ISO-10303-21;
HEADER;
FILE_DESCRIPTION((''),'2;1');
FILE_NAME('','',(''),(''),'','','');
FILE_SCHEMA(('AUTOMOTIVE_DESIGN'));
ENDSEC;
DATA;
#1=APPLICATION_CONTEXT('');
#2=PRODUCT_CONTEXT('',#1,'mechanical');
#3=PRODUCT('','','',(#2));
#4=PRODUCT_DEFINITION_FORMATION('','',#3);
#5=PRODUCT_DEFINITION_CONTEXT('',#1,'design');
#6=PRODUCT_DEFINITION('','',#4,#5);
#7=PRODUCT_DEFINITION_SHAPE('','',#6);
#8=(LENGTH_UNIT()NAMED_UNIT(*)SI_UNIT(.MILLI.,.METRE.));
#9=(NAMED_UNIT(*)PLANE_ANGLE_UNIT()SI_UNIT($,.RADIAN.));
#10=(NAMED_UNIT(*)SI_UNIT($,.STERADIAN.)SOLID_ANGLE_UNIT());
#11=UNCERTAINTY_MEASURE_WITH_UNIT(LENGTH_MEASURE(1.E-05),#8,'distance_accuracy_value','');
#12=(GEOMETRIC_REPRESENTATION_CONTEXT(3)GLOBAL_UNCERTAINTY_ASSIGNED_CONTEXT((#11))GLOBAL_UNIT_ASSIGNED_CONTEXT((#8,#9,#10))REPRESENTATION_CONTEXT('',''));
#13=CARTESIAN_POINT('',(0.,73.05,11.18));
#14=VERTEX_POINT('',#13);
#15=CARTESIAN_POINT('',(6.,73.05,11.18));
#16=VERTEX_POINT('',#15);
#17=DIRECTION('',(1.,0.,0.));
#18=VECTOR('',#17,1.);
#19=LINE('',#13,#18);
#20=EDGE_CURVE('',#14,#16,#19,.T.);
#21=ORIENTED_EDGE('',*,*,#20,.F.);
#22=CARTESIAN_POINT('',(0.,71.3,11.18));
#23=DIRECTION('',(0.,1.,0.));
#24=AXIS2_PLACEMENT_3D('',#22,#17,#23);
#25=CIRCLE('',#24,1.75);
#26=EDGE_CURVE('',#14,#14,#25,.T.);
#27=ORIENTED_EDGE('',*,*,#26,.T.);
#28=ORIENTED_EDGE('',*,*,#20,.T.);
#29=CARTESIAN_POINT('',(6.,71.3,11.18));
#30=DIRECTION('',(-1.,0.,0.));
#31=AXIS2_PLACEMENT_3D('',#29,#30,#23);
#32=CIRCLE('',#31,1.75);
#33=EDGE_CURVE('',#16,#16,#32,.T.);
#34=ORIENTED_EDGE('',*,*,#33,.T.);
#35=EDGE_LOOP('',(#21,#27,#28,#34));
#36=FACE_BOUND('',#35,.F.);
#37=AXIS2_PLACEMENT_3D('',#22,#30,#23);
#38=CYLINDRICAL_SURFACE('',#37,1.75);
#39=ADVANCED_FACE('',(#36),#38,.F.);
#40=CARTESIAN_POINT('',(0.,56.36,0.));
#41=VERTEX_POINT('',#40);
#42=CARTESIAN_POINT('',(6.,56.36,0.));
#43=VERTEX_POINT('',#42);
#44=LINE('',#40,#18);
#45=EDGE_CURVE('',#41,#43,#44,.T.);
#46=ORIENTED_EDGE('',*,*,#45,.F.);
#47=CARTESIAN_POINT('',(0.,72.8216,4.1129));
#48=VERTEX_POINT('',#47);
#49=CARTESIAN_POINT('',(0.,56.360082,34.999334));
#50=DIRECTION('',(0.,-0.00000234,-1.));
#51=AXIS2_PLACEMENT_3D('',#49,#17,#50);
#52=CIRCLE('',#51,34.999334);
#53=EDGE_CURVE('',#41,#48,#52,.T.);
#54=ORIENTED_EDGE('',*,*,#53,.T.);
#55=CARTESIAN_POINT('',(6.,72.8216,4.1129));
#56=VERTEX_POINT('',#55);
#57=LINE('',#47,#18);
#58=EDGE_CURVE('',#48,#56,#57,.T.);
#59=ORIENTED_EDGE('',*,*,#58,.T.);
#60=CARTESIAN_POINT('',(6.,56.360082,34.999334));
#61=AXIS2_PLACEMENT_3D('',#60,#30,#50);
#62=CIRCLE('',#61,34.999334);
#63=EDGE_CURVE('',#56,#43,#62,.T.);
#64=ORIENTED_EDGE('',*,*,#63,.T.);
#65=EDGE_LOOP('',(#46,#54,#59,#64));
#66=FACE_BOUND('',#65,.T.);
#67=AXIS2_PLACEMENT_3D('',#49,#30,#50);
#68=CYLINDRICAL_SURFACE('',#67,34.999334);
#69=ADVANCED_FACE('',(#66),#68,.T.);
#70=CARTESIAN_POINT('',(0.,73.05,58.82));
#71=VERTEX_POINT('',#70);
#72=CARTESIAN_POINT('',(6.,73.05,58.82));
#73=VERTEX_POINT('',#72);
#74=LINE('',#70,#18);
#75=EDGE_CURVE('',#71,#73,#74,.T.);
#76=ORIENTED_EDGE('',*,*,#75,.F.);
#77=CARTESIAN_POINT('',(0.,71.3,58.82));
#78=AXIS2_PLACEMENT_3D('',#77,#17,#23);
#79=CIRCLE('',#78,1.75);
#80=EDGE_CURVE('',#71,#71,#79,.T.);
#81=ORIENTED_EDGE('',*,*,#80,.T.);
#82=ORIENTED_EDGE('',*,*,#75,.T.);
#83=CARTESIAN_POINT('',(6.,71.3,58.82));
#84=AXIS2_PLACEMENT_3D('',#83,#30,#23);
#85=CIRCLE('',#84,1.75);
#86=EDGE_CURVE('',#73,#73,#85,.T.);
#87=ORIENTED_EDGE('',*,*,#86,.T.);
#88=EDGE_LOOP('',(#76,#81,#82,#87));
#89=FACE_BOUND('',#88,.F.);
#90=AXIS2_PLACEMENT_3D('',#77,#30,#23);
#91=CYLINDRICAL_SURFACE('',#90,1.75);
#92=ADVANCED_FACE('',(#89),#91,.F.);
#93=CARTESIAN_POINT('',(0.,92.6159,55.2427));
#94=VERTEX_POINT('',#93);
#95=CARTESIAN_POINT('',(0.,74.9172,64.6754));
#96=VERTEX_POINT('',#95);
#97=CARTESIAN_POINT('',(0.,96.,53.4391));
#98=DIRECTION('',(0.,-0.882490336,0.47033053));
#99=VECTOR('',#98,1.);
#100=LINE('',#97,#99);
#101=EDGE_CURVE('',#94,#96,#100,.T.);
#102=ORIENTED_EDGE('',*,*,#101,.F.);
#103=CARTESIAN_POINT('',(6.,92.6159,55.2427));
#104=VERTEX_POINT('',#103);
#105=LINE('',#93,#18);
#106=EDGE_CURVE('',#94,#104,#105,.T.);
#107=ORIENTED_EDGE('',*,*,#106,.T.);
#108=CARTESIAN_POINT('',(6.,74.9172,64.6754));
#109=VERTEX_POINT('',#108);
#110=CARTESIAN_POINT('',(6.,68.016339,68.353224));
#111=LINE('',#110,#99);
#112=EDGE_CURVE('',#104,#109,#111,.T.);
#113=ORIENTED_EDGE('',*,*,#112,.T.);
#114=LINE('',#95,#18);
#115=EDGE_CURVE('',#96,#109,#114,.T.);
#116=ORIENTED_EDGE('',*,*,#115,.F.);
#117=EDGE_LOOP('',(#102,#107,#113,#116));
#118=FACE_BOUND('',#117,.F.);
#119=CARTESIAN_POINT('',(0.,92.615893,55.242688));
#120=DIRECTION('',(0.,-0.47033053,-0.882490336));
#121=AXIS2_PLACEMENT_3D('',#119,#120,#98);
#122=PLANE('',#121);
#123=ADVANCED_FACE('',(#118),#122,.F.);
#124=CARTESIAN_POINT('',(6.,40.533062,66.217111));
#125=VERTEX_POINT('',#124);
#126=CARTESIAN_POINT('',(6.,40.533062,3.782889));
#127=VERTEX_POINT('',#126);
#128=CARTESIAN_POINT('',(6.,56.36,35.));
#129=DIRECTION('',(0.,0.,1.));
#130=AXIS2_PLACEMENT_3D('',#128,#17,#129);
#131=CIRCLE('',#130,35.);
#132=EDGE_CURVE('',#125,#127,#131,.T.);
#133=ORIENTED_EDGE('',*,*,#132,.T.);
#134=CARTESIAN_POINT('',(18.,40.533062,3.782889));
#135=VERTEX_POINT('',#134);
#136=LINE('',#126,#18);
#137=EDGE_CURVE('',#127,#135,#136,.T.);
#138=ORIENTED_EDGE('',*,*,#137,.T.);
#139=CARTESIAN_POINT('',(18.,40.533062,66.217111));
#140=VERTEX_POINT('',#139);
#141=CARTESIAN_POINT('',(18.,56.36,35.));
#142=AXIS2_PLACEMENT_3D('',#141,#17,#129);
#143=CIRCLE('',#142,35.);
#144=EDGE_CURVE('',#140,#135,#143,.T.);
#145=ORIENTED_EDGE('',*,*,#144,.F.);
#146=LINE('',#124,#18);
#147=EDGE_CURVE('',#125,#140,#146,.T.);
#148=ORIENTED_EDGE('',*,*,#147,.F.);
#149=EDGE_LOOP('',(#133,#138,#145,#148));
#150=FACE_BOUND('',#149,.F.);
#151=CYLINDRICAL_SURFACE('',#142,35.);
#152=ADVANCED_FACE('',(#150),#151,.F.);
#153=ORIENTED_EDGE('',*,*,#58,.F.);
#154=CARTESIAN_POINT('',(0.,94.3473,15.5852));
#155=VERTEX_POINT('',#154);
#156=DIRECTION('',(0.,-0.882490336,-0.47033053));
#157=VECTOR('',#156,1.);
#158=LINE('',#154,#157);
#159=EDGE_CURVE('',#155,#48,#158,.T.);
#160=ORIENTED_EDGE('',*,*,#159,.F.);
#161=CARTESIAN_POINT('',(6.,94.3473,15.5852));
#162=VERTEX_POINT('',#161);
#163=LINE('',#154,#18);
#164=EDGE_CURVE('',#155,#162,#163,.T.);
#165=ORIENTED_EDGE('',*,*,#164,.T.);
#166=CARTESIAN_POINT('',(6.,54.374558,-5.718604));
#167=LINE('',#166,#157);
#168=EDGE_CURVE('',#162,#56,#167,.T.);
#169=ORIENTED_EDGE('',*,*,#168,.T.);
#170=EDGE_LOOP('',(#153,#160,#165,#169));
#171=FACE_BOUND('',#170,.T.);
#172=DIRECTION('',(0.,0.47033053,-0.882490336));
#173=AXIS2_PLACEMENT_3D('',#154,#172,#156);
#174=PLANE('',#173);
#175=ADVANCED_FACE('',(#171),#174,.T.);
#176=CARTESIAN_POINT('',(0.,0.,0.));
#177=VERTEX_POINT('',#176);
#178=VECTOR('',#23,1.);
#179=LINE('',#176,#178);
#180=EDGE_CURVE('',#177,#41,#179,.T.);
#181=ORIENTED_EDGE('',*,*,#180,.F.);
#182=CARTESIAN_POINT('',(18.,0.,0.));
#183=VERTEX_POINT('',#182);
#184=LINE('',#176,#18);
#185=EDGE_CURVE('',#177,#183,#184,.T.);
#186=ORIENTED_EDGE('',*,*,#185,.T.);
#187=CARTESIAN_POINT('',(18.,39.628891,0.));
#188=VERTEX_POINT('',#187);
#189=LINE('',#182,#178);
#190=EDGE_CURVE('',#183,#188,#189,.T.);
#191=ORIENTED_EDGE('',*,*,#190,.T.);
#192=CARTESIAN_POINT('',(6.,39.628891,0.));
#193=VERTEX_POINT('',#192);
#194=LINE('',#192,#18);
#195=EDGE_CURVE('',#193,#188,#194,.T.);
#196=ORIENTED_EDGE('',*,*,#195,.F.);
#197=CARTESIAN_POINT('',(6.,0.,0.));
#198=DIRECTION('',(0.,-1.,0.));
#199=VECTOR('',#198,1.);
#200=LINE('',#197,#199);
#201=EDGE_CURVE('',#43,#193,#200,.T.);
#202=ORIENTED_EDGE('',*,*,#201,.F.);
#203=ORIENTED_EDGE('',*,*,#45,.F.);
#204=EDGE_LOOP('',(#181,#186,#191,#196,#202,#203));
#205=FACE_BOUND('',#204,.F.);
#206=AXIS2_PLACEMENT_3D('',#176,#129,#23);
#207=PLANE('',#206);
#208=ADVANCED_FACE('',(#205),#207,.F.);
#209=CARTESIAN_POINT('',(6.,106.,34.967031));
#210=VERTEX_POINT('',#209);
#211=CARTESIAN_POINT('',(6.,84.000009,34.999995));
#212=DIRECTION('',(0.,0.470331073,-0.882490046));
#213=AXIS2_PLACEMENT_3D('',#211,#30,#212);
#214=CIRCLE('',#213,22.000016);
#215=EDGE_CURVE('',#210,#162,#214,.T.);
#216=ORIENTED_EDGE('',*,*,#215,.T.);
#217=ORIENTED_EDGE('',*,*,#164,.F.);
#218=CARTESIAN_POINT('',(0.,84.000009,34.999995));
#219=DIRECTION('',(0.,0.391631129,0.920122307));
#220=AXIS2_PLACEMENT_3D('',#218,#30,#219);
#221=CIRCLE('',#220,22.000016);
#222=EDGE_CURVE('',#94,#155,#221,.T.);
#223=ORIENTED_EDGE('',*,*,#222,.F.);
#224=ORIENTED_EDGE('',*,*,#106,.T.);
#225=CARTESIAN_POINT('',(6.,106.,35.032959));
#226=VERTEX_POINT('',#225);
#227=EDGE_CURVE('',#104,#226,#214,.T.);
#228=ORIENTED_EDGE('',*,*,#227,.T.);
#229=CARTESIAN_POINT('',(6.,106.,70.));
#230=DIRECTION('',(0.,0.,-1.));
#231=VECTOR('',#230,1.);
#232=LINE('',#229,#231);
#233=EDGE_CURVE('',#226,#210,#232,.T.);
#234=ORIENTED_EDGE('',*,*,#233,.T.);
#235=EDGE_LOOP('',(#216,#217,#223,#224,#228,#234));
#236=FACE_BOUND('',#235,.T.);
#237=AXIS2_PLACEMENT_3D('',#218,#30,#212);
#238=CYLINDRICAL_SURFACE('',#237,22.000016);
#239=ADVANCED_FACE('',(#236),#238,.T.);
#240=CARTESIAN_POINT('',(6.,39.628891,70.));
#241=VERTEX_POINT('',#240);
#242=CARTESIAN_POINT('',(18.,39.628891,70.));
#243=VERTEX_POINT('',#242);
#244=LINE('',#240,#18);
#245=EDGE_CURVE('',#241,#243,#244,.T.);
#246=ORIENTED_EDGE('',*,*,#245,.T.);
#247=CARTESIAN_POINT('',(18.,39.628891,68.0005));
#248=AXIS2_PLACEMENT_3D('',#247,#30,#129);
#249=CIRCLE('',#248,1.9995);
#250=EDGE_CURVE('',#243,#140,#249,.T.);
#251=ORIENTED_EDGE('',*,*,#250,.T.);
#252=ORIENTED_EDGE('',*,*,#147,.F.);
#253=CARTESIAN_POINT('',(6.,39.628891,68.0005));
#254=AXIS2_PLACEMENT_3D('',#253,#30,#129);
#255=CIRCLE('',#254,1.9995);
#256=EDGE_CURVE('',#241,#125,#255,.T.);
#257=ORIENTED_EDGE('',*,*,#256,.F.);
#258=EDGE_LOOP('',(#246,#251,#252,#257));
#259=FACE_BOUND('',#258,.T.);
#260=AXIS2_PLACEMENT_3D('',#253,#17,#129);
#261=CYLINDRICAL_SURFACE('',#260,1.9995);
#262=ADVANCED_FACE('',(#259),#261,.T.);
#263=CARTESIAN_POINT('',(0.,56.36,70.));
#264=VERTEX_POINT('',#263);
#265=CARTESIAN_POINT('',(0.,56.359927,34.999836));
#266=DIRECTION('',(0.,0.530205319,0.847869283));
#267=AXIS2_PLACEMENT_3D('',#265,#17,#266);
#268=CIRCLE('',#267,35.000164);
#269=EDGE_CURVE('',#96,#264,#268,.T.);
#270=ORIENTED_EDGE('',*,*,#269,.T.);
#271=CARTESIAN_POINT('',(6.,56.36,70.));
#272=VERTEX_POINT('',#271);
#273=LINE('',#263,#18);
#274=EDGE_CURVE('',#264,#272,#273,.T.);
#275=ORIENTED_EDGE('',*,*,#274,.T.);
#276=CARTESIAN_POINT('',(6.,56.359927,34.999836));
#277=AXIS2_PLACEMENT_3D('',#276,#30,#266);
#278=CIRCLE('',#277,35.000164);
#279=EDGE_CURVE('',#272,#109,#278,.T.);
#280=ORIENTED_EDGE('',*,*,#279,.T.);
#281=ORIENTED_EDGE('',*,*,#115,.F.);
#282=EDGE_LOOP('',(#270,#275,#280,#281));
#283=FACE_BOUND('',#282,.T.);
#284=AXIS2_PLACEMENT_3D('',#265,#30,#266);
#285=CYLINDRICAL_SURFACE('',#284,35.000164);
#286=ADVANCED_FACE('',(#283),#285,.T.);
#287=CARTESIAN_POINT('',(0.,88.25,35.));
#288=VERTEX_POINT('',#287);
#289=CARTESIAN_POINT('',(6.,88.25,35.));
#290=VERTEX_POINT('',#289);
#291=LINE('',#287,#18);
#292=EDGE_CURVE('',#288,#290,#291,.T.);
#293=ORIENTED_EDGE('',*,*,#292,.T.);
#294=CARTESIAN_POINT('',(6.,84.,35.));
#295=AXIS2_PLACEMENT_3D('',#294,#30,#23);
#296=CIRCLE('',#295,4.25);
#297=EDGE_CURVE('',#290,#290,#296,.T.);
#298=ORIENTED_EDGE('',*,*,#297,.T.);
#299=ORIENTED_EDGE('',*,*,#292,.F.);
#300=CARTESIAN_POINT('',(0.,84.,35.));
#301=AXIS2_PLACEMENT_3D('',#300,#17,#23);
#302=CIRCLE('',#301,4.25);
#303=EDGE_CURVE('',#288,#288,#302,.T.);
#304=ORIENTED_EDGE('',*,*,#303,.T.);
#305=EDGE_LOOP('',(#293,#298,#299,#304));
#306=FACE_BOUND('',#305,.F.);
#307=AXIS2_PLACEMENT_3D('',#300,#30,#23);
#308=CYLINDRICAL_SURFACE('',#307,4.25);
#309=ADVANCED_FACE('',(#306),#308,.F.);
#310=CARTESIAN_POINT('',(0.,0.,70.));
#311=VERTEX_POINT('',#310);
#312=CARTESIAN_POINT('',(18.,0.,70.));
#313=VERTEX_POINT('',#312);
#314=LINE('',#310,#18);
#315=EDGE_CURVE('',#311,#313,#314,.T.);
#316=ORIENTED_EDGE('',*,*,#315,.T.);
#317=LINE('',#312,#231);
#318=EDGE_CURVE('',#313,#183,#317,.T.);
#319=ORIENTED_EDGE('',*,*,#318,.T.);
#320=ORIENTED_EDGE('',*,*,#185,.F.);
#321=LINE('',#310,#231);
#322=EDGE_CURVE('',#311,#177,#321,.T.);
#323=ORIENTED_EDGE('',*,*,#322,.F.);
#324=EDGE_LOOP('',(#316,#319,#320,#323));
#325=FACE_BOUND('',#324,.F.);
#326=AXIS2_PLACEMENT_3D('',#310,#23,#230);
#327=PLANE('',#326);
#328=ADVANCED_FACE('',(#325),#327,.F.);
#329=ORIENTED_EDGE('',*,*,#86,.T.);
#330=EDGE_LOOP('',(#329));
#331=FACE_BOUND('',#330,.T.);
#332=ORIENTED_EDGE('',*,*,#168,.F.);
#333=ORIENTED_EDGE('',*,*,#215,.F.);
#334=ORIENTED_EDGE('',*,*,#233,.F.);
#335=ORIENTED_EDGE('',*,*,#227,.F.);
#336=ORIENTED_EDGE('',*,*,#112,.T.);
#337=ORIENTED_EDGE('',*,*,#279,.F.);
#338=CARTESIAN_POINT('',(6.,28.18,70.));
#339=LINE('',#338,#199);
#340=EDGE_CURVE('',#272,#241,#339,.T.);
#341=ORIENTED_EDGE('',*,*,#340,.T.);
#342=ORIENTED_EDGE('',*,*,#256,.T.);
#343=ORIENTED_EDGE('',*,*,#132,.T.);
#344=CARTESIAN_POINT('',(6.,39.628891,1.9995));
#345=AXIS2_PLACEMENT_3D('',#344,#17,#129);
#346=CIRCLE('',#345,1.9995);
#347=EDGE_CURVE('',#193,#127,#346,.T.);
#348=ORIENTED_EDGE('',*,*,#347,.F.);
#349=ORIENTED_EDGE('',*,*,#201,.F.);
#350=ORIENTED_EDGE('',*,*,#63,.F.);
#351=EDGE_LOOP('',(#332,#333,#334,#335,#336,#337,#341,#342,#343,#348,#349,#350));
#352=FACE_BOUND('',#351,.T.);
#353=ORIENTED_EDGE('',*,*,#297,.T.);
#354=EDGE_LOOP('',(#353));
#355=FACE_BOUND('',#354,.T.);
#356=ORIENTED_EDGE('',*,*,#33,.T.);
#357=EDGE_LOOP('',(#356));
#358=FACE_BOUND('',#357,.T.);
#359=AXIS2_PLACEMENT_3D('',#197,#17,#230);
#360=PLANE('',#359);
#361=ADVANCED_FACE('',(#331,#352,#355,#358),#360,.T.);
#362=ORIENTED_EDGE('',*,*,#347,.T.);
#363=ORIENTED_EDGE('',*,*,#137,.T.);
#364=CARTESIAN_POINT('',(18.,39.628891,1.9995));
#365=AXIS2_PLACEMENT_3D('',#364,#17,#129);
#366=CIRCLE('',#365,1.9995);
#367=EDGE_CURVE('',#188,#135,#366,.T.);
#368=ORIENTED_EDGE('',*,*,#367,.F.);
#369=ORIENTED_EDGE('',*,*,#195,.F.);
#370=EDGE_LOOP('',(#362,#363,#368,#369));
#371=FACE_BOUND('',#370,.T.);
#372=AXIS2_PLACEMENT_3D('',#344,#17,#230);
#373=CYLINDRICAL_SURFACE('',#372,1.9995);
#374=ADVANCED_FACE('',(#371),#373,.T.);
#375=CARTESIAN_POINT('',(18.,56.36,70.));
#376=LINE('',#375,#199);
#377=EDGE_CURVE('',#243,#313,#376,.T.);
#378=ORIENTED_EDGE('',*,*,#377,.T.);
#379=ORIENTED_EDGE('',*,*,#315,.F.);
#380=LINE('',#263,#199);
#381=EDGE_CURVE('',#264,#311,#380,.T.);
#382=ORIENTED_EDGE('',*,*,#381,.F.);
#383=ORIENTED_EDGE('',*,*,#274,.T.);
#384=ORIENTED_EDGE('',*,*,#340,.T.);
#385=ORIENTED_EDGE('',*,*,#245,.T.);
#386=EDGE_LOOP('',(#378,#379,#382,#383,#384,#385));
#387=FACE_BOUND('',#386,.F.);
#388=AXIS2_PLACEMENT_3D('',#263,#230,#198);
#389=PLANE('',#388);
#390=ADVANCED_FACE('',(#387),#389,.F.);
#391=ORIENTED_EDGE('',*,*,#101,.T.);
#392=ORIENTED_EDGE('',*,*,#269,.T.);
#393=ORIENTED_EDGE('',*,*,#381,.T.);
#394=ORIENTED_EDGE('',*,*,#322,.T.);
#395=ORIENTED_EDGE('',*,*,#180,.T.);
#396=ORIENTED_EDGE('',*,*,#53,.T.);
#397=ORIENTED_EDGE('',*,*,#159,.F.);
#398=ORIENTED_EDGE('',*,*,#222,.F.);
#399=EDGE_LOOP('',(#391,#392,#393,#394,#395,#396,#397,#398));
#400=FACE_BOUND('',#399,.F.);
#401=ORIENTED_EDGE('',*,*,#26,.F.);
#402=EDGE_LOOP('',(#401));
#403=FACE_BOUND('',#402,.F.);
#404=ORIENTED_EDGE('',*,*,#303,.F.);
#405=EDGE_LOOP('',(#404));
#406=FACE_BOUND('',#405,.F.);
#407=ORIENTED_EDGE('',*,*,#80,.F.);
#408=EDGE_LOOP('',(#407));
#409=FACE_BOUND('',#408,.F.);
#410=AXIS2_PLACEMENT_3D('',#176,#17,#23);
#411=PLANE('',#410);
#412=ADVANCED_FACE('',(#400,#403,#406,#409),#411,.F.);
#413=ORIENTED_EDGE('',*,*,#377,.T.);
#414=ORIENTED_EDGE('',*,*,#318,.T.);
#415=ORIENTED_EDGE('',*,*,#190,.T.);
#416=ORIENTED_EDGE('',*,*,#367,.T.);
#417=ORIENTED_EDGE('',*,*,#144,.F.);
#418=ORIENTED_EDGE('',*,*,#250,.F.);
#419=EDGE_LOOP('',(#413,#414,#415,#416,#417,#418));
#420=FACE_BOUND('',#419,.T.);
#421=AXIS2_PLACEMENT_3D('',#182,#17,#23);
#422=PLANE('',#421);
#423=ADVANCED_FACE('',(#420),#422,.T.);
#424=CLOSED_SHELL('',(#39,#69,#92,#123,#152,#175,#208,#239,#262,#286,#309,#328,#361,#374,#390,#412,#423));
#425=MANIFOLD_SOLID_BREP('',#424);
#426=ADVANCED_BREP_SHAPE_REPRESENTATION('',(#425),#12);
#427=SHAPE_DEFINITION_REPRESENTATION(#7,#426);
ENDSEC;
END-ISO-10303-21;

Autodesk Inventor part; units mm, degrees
ref_plane "YZ Plane" through (0, 0, 0) normal (1, 0, 0) x (0, 1, 0)
ref_plane "XZ Plane" through (0, 0, 0) normal (0, 1, 0) x (-1, 0, 0)
ref_plane "XY Plane" through (0, 0, 0) normal (0, 0, 1) x (1, 0, 0)
sketch "Sketch3" plane through (0, 0, 0) normal (1, 0, 0) x (0, 1, 0)
  line L0 (0, 0) -> (56.36, 0)
  line L1 (56.36, 70) -> (0, 70)
  line L2 (0, 70) -> (0, 0)
  circle A0 centre (84, 35) radius 4.25
  line L3 (84, 35) -> (56.36, 35)
  line L4 (96, 53.4391) -> (74.4743, 64.9114)
  line L5 (94.3473, 15.5852) -> (72.8216, 4.1129)
  arc A1 (94.3473, 15.5852) -> (92.6159, 55.2427) centre (84, 35) ccw
  arc A2 (74.9172, 64.6754) -> (56.36, 70) centre (56.36, 35) ccw
  arc A3 (56.36, 0) -> (72.8216, 4.1129) centre (56.36, 35) ccw
  line L6 (84, 35) -> (71.3, 35)
  line L7 (71.3, 35) -> (71.3, 58.82)
  line L8 (71.3, 58.82) -> (71.3, 35)
  line L9 (71.3, 35) -> (71.3, 11.18)
  circle A4 centre (71.3, 58.82) radius 1.75
  circle A5 centre (71.3, 11.18) radius 1.75
  dimension "d31" = 8.5
  dimension "d33" = 27.64
  dimension "d35" = 12.7
  dimension "d36" = 23.82
  dimension "d37" = 23.82
  dimension "d38" = 3.5
  dimension "d40" = 3.5
  dimension "d41" = 84
extrude "Extrusion3" add sketch "Sketch3" along normal blind 18
sketch "Sketch4" plane through (18, 0, 0) normal (1, 0, 0) x (0, 0, -1)
  line L0 (-35, 84) -> (-35, 56.36)
  arc A0 (-70, 56.36) -> (0, 56.36) centre (-35, 56.36) ccw
  line L1 (0, 56.36) -> (-35, 56.36)
  line L2 (-70, 56.36) -> (-70, 106)
  line L3 (-70, 106) -> (0, 106)
  line L4 (0, 106) -> (0, 56.36)
  point P0 (0, 0)
  dimension "d44" = 27.64
extrude "Extrusion4" cut sketch "Sketch4" against normal blind 12
fillet "Fillet1" radius 2 2 edges at (12, 56.36, 70) (12, 56.36, 0)
properties part number "Suporte Motor"
